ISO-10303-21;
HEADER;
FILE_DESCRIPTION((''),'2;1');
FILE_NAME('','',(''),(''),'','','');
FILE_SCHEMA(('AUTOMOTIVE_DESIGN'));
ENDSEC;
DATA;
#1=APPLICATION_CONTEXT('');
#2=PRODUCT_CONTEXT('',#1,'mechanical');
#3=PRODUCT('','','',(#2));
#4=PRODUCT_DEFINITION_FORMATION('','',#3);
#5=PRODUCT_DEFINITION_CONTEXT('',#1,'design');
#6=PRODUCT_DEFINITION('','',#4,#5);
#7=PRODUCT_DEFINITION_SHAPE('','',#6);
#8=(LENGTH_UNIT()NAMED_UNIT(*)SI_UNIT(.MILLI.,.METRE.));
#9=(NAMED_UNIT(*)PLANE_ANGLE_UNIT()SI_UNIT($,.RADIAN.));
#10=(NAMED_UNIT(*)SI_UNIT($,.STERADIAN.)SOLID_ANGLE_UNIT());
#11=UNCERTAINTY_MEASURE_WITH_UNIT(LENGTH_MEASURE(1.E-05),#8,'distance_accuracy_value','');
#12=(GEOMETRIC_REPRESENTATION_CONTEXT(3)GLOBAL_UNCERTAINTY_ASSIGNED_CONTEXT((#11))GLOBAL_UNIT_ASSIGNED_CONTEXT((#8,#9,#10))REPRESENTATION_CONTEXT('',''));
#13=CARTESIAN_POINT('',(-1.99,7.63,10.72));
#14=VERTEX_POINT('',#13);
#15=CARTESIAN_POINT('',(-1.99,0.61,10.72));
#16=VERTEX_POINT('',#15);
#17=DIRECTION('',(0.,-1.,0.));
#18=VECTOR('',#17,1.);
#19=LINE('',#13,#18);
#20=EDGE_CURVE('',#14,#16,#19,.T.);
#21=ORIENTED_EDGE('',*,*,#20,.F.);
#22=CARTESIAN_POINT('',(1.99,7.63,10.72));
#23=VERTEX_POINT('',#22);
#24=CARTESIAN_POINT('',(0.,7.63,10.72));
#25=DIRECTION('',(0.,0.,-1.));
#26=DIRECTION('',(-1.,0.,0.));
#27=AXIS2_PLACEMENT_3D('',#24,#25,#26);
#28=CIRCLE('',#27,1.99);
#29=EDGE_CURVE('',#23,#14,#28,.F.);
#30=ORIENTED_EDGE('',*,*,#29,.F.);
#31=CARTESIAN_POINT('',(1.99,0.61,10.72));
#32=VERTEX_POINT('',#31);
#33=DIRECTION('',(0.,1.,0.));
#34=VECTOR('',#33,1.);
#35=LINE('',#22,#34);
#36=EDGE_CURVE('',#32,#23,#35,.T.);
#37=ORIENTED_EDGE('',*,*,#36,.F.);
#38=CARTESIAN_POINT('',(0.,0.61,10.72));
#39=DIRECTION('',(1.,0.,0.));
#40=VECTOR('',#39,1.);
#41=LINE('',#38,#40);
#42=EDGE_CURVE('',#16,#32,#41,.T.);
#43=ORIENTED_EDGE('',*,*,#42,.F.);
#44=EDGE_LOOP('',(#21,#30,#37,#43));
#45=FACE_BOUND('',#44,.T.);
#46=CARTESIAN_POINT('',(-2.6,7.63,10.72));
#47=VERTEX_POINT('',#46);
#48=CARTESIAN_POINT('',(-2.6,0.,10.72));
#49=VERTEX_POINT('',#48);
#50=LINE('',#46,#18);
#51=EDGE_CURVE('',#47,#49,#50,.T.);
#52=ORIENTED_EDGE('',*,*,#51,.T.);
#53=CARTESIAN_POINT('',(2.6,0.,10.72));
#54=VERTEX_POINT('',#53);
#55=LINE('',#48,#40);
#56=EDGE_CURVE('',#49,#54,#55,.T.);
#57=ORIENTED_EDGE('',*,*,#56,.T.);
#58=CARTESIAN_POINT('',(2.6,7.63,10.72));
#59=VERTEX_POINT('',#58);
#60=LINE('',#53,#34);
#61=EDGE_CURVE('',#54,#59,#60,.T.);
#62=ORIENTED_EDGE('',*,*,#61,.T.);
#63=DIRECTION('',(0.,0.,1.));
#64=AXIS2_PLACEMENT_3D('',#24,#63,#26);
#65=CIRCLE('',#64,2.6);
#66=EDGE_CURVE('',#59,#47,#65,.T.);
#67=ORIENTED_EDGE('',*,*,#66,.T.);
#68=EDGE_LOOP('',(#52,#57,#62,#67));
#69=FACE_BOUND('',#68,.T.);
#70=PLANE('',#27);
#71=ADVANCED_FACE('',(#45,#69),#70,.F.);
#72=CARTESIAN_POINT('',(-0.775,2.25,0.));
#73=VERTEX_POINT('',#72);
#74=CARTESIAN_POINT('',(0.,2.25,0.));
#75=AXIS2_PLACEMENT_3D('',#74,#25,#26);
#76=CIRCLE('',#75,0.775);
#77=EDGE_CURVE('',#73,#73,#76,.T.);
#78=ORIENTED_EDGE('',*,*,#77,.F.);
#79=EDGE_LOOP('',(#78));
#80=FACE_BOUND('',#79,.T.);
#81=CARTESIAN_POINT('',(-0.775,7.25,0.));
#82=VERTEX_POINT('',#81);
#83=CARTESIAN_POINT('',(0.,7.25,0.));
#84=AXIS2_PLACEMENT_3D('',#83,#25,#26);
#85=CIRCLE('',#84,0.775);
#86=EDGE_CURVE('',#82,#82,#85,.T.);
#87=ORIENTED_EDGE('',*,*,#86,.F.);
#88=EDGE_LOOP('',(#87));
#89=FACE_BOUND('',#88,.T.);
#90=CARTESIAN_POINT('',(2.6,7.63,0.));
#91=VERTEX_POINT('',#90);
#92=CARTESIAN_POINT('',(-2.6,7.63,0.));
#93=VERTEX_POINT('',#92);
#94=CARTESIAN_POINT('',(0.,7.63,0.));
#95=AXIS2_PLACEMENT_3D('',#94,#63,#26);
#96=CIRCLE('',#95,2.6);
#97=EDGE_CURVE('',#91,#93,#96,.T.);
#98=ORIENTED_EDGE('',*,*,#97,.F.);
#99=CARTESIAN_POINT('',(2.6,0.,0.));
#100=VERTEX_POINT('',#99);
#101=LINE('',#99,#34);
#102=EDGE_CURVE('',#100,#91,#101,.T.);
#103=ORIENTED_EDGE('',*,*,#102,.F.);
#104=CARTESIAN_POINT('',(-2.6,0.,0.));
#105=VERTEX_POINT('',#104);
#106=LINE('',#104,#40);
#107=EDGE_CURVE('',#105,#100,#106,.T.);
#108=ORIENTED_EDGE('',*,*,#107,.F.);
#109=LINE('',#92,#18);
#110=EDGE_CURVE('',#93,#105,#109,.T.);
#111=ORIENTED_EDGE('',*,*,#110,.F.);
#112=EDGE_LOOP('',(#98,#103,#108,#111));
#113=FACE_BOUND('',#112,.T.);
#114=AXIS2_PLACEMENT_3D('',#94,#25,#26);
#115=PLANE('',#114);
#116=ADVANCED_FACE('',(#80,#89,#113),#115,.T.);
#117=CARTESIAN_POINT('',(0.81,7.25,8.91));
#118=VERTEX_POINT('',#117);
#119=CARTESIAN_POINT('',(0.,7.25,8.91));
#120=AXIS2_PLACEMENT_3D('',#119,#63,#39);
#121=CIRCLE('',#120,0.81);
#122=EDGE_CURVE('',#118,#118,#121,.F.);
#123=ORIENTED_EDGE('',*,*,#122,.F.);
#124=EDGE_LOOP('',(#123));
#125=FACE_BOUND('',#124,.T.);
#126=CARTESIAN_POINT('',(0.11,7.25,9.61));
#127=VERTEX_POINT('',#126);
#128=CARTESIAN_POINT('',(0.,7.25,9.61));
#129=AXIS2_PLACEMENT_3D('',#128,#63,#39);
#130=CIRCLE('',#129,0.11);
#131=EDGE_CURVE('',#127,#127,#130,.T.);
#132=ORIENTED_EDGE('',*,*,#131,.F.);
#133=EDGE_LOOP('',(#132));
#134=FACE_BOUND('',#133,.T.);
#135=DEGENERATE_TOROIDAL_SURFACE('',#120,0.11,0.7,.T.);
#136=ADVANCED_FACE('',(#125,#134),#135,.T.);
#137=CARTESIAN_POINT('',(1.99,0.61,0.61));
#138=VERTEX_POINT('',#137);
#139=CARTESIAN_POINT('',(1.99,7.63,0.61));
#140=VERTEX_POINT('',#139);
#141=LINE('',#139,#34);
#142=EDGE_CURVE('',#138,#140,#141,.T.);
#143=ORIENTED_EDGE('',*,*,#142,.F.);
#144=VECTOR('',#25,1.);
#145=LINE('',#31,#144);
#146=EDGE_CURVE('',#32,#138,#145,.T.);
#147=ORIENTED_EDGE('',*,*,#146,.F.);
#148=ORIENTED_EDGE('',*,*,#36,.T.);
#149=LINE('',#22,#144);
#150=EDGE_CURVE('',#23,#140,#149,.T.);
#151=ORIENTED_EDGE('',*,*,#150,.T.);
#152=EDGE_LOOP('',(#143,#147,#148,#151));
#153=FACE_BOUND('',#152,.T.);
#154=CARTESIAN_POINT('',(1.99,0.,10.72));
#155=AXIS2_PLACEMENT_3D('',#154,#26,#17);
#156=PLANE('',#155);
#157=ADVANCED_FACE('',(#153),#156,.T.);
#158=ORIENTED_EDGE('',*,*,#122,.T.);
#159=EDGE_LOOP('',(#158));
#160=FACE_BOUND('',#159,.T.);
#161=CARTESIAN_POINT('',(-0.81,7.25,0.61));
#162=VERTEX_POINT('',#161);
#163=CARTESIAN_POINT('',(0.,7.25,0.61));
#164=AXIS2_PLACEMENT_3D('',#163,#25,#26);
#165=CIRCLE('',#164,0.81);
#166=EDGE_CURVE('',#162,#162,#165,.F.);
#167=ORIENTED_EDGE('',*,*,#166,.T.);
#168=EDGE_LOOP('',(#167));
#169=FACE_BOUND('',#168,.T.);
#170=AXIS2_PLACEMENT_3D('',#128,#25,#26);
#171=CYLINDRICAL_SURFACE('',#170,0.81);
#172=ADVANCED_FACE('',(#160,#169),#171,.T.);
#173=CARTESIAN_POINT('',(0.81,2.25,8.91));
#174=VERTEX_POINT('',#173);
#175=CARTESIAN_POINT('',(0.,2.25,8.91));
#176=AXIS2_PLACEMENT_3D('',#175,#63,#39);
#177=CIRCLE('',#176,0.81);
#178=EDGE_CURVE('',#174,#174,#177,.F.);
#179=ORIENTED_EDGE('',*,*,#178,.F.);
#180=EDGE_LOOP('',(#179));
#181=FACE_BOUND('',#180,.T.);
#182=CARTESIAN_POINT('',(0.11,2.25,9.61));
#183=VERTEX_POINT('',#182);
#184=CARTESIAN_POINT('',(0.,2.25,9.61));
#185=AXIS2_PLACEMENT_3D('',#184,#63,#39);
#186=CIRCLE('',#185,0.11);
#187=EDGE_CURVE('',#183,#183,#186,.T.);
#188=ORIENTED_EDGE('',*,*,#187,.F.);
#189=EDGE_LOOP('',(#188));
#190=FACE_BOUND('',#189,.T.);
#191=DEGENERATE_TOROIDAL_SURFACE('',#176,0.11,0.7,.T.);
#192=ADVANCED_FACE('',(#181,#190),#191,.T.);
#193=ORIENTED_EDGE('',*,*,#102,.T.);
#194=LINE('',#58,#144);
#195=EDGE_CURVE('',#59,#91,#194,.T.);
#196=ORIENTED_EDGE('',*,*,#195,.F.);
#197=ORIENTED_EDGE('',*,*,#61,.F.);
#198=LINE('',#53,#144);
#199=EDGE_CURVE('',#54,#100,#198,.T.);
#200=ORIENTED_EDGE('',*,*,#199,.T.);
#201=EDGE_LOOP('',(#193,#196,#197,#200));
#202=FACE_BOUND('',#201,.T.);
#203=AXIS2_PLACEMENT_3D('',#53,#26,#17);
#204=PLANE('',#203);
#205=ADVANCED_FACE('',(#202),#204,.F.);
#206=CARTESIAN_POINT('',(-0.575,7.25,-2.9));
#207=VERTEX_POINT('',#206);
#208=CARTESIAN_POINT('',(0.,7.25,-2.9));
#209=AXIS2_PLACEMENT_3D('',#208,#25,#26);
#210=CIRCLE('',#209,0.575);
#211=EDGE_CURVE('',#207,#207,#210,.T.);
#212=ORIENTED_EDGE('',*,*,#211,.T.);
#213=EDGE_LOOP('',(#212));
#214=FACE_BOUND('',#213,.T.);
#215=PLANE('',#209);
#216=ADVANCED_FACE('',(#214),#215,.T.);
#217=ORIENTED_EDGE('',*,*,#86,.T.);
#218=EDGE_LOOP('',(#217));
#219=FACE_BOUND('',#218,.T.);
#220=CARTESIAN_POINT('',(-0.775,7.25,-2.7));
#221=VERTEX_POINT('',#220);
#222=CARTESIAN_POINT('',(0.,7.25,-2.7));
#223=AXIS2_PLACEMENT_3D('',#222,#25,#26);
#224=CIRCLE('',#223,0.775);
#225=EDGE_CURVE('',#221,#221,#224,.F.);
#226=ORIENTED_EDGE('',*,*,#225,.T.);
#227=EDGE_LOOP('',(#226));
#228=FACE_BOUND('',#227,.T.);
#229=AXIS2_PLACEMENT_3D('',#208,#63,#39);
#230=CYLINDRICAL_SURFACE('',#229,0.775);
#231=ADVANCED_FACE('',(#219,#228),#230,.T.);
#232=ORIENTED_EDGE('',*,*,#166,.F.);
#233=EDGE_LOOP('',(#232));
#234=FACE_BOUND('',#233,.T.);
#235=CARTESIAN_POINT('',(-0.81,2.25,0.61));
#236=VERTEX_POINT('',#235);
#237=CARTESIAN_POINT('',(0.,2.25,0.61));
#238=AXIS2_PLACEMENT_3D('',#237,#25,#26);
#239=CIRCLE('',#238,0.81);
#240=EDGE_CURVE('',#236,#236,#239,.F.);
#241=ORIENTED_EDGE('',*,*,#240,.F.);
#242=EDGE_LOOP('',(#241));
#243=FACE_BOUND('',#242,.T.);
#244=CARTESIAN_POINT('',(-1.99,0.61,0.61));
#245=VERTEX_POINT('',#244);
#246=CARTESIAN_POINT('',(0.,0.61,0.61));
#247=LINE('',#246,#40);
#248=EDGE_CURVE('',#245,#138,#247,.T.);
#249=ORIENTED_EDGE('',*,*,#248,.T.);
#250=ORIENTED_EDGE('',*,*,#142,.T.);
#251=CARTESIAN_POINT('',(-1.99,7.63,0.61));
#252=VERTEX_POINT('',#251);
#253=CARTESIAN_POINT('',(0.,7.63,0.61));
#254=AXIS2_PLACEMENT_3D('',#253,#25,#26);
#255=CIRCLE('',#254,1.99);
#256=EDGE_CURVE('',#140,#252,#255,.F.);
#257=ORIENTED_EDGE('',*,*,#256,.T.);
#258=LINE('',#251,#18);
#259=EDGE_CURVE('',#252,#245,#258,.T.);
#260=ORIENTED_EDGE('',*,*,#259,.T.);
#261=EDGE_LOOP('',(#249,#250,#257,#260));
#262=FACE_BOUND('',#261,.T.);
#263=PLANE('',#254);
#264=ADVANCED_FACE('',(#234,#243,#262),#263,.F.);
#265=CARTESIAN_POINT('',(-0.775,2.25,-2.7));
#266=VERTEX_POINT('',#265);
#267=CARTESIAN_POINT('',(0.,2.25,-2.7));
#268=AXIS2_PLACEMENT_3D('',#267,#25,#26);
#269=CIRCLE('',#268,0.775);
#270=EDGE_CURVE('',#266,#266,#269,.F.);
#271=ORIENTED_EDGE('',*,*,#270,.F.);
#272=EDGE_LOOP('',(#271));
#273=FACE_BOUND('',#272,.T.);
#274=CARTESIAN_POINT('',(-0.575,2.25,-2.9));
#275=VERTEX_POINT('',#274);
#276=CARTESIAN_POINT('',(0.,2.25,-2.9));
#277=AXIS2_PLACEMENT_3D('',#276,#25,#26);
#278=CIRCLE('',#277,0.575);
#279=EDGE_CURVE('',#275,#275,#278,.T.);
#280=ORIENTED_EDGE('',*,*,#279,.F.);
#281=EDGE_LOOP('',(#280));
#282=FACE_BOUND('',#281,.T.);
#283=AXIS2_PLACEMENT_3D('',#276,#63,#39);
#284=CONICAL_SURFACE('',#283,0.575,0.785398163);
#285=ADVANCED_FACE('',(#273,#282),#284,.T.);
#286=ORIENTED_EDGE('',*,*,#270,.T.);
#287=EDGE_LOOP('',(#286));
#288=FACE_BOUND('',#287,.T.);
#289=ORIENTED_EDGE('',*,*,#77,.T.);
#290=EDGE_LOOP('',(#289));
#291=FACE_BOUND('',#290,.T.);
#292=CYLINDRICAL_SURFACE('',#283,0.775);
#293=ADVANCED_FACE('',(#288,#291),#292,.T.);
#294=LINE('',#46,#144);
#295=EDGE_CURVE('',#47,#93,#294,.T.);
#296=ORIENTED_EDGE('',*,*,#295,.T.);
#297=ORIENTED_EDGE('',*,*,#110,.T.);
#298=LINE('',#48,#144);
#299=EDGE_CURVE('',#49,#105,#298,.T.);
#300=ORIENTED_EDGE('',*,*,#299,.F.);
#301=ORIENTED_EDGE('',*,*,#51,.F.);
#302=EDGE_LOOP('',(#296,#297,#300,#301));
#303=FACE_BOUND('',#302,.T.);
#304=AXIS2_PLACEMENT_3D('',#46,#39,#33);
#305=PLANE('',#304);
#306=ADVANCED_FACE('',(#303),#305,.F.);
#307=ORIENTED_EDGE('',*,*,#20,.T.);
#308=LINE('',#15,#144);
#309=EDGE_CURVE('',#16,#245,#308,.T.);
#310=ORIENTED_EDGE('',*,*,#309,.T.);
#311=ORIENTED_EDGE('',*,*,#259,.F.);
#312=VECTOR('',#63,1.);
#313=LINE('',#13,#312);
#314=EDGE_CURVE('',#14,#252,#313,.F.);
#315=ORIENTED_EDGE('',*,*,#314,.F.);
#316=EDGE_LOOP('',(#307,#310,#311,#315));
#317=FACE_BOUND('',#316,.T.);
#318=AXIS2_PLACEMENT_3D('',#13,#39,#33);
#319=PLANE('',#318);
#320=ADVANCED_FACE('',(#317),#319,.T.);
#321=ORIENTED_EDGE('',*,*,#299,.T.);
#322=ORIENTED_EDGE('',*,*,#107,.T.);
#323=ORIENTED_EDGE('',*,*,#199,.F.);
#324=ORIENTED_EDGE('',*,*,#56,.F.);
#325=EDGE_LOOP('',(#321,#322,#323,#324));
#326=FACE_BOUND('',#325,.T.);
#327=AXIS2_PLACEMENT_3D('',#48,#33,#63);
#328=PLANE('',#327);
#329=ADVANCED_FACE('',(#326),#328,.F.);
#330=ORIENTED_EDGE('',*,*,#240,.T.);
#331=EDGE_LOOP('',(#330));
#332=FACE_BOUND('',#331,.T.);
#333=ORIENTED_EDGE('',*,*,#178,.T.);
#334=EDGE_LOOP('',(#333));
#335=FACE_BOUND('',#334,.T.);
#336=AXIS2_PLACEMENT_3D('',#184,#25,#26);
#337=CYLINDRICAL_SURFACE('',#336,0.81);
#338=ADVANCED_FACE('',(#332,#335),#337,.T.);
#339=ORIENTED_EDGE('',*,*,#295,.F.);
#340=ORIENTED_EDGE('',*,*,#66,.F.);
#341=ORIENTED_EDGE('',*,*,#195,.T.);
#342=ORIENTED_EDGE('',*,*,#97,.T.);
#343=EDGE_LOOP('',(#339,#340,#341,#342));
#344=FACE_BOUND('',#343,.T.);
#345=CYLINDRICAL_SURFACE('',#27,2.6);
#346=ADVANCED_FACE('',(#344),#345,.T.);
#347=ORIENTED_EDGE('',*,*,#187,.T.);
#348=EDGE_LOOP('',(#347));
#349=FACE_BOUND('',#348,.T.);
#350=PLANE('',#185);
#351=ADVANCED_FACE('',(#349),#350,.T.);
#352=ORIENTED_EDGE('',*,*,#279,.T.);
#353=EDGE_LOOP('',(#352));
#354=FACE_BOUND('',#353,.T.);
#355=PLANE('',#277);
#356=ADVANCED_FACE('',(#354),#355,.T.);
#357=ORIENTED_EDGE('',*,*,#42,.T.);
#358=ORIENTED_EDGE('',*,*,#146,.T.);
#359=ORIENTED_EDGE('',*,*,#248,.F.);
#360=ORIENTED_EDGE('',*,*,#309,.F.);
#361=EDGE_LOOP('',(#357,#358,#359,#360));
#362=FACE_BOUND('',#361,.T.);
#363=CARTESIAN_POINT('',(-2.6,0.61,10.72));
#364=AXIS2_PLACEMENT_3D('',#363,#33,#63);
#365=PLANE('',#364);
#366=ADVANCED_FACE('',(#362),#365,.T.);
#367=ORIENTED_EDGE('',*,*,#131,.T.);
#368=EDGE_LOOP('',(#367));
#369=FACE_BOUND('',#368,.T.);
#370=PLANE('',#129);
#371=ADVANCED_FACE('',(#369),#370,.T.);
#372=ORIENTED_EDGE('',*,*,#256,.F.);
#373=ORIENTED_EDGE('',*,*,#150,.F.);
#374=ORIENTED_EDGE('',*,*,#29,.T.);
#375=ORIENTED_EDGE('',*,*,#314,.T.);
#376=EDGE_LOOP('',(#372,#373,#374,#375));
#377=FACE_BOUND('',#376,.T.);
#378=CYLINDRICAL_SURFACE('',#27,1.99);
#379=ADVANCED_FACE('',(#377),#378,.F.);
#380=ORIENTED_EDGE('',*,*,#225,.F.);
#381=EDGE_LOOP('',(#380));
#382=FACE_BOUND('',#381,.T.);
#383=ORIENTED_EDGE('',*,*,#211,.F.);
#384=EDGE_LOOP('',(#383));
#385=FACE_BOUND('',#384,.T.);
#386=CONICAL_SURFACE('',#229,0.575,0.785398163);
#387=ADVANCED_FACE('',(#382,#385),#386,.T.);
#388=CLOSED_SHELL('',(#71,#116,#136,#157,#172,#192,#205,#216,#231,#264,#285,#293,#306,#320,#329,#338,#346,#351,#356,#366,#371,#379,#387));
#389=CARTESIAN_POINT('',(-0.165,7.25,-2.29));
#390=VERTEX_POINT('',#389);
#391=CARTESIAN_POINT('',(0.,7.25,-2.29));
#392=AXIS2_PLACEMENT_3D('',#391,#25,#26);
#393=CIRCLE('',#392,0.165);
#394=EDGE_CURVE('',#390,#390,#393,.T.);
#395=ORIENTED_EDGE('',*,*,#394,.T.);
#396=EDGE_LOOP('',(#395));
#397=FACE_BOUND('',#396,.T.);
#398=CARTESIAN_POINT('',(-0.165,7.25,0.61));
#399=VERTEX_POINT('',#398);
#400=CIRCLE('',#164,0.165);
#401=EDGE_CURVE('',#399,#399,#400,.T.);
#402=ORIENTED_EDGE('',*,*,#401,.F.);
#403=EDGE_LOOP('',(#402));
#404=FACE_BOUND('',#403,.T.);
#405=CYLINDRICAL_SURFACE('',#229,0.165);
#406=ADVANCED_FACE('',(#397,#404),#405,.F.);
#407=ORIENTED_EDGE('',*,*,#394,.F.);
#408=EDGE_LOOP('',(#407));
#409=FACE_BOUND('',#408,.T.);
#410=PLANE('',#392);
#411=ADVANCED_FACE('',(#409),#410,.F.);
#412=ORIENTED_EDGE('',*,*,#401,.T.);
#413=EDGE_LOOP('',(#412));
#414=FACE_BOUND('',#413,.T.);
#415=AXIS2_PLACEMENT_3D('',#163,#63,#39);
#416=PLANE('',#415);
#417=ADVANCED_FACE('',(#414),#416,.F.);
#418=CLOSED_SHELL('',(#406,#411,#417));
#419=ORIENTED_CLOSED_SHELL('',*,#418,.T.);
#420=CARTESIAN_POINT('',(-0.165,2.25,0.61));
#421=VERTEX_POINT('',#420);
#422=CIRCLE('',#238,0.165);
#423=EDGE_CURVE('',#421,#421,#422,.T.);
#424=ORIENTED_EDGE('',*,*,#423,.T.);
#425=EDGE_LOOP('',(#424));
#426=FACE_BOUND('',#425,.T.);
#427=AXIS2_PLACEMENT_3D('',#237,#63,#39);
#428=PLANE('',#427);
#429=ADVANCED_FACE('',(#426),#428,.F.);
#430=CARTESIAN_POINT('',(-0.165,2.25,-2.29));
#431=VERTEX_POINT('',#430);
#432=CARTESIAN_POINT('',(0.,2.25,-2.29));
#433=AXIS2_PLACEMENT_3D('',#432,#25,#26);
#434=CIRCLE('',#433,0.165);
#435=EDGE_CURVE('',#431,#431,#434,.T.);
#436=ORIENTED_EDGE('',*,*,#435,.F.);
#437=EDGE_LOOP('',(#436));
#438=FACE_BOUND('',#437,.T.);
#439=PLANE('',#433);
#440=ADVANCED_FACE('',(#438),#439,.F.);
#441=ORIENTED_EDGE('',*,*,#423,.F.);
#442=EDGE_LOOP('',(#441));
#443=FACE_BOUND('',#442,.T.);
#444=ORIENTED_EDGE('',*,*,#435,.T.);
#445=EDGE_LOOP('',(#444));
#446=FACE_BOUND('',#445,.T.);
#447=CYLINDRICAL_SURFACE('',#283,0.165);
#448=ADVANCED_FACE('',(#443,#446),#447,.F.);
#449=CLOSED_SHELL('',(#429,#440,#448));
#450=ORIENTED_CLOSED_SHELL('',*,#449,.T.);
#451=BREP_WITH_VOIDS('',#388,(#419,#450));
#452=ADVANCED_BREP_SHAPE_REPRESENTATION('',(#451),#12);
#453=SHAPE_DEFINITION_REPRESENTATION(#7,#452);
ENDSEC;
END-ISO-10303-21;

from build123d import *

# Parameters (mm, degrees)
SALIENTE_EXTRUIR1_DEPTH = 10.72
CROQUIS2_R              = 0.775
SALIENTE_EXTRUIR2_DEPTH = 2.9
CHAFL_N1_SIZE           = 0.2
VACIADO1_START          = 0.61
VACIADO1_DEPTH          = 10.11
VACIADO1_START_2        = -2.29
VACIADO1_2_OUTLINE_R    = 0.165
VACIADO1_2_DEPTH        = 2.9
CROQUIS4_R              = 0.81
SALIENTE_EXTRUIR4_DEPTH = 9
REDONDEO1_R             = 0.7


# Read off the part's stored shape, not the designer's step: Vaciado1
with BuildPart() as part:
    # Croquis1 → Saliente-Extruir1 (new body)
    with BuildSketch(Plane.XY):
        with BuildLine():
            Line((-2.6, 7.63), (-2.6, 0))
            Line((-2.6, 0), (2.6, 0))
            Line((2.6, 0), (2.6, 7.63))
            ThreePointArc((2.6, 7.63), (0, 10.23), (-2.6, 7.63))
        make_face()
    extrude(amount=SALIENTE_EXTRUIR1_DEPTH)

    # Croquis2 → Saliente-Extruir2 (add)
    with BuildSketch(Plane(origin=(0, 0, 0), x_dir=(-1, 0, 0), z_dir=(0, 0, -1))):
        with Locations((0, 7.25)):
            Circle(CROQUIS2_R)
        with Locations((0, 2.25)):
            Circle(CROQUIS2_R)
    extrude(amount=SALIENTE_EXTRUIR2_DEPTH)

    # Chaflán1
    chafl_n1_edges = [part.edges().sort_by_distance(p)[0] for p in [
        (0.775, 7.25, -2.9),
        (0.775, 2.25, -2.9),
    ]]
    chamfer(chafl_n1_edges, length=CHAFL_N1_SIZE)

    # Vaciado1 outline → Vaciado1 (cut)
    with BuildSketch(Plane.XY.offset(VACIADO1_START)):
        with BuildLine():
            ThreePointArc((1.99, 7.63), (0, 9.62), (-1.99, 7.63))
            Line((-1.99, 7.63), (-1.99, 0.61))
            Line((-1.99, 0.61), (1.99, 0.61))
            Line((1.99, 0.61), (1.99, 7.63))
        make_face()
    extrude(amount=VACIADO1_DEPTH, mode=Mode.SUBTRACT)

    # Vaciado1 2 outline → Vaciado1 2 (cut)
    with BuildSketch(Plane.XY.offset(VACIADO1_START_2)):
        with Locations((0, 7.25)):
            Circle(VACIADO1_2_OUTLINE_R)
        with Locations((0, 2.25)):
            Circle(VACIADO1_2_OUTLINE_R)
    extrude(amount=VACIADO1_2_DEPTH, mode=Mode.SUBTRACT)

    # Croquis4 → Saliente-Extruir4 (add)
    with BuildSketch(Plane.XY.offset(0.61)):
        with Locations(Location((0, 2.25, 0), (0, 0, 180))):
            Circle(CROQUIS4_R)
        with Locations(Location((0, 7.25, 0), (0, 0, 180))):
            Circle(CROQUIS4_R)
    extrude(amount=SALIENTE_EXTRUIR4_DEPTH)

    # Redondeo1
    redondeo1_edges = [part.edges().sort_by_distance(p)[0] for p in [
        (0.81, 2.25, 9.61),
        (0.81, 7.25, 9.61),
    ]]
    fillet(redondeo1_edges, radius=REDONDEO1_R)


solid = part.part
